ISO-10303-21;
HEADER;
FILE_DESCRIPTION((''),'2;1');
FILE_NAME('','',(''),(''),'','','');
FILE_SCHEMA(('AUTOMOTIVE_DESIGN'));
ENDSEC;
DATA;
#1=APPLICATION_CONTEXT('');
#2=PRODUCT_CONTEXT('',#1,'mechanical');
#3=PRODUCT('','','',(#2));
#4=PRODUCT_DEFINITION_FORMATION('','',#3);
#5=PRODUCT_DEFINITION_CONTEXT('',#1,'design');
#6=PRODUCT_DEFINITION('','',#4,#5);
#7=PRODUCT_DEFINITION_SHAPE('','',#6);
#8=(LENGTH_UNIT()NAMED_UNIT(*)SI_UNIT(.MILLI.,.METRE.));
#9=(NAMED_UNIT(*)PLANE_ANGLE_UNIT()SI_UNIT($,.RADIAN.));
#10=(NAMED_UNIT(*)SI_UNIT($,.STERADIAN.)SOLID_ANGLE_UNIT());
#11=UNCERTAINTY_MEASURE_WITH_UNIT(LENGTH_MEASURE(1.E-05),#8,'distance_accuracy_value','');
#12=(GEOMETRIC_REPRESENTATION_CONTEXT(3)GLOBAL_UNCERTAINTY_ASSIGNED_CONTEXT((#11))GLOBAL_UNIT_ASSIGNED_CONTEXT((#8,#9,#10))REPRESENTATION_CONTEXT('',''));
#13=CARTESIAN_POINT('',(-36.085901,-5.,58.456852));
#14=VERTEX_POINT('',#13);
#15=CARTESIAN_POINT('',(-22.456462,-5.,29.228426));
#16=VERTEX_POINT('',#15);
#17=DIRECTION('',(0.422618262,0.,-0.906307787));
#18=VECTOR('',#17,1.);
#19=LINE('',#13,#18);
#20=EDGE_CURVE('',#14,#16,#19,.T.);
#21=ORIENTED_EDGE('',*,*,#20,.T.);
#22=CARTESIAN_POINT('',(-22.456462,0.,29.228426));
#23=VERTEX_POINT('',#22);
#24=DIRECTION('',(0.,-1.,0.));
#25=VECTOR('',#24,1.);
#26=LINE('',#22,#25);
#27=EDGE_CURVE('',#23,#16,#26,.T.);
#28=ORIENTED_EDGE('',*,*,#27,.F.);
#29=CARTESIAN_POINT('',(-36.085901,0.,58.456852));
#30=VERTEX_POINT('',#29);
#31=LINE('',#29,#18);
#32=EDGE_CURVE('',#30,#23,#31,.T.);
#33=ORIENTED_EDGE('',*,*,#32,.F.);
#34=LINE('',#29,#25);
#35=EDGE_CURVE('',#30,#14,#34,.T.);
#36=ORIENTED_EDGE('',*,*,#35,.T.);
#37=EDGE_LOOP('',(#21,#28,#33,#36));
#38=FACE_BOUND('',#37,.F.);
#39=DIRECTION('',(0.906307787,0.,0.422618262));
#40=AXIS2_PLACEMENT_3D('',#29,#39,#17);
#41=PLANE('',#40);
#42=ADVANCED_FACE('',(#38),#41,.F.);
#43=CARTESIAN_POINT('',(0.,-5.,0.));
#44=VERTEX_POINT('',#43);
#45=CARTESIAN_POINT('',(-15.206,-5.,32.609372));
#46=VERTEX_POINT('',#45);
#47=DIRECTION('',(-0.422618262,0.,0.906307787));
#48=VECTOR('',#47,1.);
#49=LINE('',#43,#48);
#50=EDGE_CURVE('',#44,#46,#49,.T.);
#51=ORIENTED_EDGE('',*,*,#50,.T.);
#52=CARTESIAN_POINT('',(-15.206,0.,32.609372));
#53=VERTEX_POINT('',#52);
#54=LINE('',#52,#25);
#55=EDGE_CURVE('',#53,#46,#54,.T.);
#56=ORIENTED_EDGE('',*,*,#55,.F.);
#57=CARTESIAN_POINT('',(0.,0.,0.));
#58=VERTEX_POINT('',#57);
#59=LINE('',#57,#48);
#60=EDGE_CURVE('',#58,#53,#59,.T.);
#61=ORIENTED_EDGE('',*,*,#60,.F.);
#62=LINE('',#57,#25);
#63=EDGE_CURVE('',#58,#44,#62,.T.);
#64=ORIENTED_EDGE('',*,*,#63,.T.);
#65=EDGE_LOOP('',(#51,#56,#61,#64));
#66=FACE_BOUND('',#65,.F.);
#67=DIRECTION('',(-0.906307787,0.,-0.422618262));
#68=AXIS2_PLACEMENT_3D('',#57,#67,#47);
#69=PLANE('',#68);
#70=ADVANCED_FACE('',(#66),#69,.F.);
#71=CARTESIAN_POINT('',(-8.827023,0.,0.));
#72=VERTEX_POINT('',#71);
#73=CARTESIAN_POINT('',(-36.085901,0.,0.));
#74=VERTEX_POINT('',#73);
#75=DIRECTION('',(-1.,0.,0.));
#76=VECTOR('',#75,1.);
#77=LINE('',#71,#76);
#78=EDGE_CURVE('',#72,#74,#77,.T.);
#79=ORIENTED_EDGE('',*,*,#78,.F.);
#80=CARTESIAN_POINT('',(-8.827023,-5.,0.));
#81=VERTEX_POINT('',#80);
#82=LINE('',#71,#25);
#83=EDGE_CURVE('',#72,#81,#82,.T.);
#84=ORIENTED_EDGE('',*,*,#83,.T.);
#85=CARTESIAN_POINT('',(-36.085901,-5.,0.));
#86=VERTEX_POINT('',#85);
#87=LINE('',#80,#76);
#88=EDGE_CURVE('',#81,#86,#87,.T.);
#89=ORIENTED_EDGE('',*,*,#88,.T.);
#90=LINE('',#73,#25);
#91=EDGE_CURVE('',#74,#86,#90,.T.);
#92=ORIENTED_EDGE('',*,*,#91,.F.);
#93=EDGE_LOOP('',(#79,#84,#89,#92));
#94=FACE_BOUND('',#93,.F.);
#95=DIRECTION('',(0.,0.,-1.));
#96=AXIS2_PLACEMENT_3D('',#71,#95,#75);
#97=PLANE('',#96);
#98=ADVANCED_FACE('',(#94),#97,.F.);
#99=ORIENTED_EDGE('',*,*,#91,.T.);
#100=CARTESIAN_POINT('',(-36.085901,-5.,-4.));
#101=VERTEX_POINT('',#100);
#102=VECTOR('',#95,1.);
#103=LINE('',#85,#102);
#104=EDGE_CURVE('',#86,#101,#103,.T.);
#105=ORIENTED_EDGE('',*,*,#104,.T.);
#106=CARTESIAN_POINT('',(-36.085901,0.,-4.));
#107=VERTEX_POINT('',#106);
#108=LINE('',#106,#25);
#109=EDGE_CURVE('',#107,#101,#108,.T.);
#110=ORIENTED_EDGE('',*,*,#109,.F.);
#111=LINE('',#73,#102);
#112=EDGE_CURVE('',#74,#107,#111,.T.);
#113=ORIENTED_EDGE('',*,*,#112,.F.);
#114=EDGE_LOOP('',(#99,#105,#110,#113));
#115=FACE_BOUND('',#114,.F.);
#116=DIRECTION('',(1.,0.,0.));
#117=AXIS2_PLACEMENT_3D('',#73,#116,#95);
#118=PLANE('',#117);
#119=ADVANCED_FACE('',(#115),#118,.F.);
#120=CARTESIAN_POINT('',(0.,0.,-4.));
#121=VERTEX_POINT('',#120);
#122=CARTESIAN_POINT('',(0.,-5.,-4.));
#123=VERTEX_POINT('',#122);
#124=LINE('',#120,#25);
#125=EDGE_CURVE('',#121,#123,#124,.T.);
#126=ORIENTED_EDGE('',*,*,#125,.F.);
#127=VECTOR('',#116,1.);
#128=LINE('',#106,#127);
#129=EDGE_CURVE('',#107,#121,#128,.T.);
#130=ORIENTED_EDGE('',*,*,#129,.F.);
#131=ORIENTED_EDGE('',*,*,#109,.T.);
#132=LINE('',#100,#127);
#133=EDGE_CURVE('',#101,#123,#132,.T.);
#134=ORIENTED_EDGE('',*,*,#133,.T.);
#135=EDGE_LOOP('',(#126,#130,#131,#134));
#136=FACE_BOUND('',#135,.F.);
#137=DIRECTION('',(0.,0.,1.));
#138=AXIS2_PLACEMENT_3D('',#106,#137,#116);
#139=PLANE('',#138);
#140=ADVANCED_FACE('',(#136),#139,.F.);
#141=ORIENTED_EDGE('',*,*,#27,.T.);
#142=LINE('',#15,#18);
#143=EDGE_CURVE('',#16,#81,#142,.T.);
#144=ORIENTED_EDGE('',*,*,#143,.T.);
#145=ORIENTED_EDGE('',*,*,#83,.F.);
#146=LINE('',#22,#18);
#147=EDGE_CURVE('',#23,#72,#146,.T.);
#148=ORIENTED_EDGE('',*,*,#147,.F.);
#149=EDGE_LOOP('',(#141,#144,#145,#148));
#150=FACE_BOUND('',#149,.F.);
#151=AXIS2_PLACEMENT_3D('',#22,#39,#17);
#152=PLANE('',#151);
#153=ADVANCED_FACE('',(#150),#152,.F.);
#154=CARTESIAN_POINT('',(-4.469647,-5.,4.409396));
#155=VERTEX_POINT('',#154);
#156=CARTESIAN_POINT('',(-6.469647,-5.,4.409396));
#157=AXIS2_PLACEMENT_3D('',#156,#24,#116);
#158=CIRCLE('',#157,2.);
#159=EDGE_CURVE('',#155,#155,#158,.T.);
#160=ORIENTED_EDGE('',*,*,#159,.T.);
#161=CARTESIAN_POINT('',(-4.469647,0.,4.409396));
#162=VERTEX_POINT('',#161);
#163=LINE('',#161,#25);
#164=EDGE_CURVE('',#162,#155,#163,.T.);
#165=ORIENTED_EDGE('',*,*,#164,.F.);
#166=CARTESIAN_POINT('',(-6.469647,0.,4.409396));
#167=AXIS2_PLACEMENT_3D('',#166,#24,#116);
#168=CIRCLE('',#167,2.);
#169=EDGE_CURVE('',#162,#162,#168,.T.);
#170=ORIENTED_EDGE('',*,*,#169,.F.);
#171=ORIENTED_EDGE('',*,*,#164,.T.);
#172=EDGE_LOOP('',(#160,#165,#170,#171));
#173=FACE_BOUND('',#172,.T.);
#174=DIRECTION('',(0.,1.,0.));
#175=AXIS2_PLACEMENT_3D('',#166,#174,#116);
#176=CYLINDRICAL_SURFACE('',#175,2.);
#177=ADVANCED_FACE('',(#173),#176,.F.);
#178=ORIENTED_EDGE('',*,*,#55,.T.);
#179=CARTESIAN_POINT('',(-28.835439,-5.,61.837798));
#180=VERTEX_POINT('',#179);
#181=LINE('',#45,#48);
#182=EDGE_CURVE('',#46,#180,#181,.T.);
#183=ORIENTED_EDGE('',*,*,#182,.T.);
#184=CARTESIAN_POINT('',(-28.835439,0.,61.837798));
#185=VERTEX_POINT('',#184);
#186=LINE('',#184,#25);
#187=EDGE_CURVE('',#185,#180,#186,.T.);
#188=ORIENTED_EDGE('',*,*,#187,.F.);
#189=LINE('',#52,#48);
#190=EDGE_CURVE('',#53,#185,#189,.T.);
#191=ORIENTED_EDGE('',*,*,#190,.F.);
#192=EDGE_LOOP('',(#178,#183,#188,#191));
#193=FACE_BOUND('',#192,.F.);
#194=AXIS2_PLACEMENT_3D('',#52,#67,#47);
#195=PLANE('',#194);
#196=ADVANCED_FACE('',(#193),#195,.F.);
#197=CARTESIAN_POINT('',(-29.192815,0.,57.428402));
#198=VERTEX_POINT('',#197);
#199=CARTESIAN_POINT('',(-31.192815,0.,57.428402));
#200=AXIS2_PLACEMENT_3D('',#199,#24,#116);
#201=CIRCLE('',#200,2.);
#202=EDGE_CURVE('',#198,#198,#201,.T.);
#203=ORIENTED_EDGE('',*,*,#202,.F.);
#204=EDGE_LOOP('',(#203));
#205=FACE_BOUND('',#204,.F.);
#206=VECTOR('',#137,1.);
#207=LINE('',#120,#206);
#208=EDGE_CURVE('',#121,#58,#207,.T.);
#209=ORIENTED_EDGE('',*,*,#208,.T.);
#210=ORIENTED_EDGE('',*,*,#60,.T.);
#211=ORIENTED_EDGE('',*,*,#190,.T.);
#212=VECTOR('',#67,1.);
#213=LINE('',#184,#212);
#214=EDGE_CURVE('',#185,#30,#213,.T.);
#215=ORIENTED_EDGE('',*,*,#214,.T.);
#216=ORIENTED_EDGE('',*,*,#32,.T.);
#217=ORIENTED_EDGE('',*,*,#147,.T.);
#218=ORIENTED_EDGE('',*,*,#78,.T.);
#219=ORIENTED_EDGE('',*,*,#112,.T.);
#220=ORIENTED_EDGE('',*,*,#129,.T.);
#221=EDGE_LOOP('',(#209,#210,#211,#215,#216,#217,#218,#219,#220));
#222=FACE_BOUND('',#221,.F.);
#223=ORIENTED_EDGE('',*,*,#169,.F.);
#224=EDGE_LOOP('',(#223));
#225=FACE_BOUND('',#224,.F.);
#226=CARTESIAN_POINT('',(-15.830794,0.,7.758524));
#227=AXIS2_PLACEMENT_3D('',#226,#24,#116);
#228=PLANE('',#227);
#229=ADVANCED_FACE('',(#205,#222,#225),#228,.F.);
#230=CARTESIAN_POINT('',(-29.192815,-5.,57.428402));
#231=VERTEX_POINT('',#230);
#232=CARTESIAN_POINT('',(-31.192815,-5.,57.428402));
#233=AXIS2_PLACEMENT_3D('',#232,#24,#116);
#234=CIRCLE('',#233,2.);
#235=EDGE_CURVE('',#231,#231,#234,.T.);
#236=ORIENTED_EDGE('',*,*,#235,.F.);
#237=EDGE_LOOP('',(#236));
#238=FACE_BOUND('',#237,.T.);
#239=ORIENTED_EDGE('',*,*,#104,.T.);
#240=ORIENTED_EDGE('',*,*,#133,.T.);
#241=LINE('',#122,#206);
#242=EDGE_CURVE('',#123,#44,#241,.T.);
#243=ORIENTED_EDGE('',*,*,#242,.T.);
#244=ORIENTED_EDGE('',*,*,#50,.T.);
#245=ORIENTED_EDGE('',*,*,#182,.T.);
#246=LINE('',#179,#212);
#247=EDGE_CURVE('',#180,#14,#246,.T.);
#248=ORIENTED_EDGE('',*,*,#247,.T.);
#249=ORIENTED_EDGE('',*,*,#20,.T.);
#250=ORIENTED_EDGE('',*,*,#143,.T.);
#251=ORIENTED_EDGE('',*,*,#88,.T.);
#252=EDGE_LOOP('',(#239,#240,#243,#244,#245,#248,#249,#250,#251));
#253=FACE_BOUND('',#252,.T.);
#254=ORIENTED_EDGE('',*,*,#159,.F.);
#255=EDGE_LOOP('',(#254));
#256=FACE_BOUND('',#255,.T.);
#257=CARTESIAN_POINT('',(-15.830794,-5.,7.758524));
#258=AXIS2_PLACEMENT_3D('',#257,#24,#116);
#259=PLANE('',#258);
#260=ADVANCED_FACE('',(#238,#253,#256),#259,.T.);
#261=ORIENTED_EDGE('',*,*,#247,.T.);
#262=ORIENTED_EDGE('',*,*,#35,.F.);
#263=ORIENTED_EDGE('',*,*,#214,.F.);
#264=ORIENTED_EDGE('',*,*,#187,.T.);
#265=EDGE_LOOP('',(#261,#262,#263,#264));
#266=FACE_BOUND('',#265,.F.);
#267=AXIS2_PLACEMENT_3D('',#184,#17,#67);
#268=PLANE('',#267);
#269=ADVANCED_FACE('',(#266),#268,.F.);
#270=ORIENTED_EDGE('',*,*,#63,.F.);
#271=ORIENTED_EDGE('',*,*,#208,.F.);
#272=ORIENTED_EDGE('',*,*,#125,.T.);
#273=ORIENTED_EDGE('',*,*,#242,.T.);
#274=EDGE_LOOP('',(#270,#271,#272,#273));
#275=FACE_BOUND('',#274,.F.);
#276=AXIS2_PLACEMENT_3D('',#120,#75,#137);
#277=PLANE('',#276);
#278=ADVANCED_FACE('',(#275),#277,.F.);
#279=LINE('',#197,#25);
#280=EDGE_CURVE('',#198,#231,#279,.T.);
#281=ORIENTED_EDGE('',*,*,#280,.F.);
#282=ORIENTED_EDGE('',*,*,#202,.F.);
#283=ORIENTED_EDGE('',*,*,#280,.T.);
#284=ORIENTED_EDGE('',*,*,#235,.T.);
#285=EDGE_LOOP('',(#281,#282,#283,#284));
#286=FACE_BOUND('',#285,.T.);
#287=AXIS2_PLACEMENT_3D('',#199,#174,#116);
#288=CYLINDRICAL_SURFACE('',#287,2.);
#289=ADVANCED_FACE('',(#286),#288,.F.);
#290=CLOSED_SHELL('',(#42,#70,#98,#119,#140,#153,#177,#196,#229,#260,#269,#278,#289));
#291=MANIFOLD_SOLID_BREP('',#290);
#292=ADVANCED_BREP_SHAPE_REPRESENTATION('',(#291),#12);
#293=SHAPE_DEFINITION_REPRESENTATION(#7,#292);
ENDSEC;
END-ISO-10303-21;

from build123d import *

# Parameters (mm, degrees)
F0_R     = 2
F1_DEPTH = 5


# Not quite as in the source:
# - a feature names something its author has since deleted; it is built from what else it names


with BuildPart() as f1:
    # F0 (on Front) → F1 (new body)
    with BuildSketch(Plane.XZ):
        Polygon((-8.8270233517, 0), (-36.085901234, 0), (-36.085901234, -4), (0, -4), (0, 0), (-15.2059999965, 32.6093722259), (-22.4564622928, 29.2284261319), align=None)
        with Locations((-6.4696469888, 4.4093964081)):
            Circle(F0_R, mode=Mode.SUBTRACT)
        Polygon((-36.085901234, 58.4568522639), (-22.4564622928, 29.2284261319), (-15.2059999965, 32.6093722259), (-28.8354389377, 61.8377983578), align=None)
        with Locations((-31.1928153006, 57.4284019497)):
            Circle(F0_R, mode=Mode.SUBTRACT)
    extrude(amount=F1_DEPTH)


solid = f1.part
